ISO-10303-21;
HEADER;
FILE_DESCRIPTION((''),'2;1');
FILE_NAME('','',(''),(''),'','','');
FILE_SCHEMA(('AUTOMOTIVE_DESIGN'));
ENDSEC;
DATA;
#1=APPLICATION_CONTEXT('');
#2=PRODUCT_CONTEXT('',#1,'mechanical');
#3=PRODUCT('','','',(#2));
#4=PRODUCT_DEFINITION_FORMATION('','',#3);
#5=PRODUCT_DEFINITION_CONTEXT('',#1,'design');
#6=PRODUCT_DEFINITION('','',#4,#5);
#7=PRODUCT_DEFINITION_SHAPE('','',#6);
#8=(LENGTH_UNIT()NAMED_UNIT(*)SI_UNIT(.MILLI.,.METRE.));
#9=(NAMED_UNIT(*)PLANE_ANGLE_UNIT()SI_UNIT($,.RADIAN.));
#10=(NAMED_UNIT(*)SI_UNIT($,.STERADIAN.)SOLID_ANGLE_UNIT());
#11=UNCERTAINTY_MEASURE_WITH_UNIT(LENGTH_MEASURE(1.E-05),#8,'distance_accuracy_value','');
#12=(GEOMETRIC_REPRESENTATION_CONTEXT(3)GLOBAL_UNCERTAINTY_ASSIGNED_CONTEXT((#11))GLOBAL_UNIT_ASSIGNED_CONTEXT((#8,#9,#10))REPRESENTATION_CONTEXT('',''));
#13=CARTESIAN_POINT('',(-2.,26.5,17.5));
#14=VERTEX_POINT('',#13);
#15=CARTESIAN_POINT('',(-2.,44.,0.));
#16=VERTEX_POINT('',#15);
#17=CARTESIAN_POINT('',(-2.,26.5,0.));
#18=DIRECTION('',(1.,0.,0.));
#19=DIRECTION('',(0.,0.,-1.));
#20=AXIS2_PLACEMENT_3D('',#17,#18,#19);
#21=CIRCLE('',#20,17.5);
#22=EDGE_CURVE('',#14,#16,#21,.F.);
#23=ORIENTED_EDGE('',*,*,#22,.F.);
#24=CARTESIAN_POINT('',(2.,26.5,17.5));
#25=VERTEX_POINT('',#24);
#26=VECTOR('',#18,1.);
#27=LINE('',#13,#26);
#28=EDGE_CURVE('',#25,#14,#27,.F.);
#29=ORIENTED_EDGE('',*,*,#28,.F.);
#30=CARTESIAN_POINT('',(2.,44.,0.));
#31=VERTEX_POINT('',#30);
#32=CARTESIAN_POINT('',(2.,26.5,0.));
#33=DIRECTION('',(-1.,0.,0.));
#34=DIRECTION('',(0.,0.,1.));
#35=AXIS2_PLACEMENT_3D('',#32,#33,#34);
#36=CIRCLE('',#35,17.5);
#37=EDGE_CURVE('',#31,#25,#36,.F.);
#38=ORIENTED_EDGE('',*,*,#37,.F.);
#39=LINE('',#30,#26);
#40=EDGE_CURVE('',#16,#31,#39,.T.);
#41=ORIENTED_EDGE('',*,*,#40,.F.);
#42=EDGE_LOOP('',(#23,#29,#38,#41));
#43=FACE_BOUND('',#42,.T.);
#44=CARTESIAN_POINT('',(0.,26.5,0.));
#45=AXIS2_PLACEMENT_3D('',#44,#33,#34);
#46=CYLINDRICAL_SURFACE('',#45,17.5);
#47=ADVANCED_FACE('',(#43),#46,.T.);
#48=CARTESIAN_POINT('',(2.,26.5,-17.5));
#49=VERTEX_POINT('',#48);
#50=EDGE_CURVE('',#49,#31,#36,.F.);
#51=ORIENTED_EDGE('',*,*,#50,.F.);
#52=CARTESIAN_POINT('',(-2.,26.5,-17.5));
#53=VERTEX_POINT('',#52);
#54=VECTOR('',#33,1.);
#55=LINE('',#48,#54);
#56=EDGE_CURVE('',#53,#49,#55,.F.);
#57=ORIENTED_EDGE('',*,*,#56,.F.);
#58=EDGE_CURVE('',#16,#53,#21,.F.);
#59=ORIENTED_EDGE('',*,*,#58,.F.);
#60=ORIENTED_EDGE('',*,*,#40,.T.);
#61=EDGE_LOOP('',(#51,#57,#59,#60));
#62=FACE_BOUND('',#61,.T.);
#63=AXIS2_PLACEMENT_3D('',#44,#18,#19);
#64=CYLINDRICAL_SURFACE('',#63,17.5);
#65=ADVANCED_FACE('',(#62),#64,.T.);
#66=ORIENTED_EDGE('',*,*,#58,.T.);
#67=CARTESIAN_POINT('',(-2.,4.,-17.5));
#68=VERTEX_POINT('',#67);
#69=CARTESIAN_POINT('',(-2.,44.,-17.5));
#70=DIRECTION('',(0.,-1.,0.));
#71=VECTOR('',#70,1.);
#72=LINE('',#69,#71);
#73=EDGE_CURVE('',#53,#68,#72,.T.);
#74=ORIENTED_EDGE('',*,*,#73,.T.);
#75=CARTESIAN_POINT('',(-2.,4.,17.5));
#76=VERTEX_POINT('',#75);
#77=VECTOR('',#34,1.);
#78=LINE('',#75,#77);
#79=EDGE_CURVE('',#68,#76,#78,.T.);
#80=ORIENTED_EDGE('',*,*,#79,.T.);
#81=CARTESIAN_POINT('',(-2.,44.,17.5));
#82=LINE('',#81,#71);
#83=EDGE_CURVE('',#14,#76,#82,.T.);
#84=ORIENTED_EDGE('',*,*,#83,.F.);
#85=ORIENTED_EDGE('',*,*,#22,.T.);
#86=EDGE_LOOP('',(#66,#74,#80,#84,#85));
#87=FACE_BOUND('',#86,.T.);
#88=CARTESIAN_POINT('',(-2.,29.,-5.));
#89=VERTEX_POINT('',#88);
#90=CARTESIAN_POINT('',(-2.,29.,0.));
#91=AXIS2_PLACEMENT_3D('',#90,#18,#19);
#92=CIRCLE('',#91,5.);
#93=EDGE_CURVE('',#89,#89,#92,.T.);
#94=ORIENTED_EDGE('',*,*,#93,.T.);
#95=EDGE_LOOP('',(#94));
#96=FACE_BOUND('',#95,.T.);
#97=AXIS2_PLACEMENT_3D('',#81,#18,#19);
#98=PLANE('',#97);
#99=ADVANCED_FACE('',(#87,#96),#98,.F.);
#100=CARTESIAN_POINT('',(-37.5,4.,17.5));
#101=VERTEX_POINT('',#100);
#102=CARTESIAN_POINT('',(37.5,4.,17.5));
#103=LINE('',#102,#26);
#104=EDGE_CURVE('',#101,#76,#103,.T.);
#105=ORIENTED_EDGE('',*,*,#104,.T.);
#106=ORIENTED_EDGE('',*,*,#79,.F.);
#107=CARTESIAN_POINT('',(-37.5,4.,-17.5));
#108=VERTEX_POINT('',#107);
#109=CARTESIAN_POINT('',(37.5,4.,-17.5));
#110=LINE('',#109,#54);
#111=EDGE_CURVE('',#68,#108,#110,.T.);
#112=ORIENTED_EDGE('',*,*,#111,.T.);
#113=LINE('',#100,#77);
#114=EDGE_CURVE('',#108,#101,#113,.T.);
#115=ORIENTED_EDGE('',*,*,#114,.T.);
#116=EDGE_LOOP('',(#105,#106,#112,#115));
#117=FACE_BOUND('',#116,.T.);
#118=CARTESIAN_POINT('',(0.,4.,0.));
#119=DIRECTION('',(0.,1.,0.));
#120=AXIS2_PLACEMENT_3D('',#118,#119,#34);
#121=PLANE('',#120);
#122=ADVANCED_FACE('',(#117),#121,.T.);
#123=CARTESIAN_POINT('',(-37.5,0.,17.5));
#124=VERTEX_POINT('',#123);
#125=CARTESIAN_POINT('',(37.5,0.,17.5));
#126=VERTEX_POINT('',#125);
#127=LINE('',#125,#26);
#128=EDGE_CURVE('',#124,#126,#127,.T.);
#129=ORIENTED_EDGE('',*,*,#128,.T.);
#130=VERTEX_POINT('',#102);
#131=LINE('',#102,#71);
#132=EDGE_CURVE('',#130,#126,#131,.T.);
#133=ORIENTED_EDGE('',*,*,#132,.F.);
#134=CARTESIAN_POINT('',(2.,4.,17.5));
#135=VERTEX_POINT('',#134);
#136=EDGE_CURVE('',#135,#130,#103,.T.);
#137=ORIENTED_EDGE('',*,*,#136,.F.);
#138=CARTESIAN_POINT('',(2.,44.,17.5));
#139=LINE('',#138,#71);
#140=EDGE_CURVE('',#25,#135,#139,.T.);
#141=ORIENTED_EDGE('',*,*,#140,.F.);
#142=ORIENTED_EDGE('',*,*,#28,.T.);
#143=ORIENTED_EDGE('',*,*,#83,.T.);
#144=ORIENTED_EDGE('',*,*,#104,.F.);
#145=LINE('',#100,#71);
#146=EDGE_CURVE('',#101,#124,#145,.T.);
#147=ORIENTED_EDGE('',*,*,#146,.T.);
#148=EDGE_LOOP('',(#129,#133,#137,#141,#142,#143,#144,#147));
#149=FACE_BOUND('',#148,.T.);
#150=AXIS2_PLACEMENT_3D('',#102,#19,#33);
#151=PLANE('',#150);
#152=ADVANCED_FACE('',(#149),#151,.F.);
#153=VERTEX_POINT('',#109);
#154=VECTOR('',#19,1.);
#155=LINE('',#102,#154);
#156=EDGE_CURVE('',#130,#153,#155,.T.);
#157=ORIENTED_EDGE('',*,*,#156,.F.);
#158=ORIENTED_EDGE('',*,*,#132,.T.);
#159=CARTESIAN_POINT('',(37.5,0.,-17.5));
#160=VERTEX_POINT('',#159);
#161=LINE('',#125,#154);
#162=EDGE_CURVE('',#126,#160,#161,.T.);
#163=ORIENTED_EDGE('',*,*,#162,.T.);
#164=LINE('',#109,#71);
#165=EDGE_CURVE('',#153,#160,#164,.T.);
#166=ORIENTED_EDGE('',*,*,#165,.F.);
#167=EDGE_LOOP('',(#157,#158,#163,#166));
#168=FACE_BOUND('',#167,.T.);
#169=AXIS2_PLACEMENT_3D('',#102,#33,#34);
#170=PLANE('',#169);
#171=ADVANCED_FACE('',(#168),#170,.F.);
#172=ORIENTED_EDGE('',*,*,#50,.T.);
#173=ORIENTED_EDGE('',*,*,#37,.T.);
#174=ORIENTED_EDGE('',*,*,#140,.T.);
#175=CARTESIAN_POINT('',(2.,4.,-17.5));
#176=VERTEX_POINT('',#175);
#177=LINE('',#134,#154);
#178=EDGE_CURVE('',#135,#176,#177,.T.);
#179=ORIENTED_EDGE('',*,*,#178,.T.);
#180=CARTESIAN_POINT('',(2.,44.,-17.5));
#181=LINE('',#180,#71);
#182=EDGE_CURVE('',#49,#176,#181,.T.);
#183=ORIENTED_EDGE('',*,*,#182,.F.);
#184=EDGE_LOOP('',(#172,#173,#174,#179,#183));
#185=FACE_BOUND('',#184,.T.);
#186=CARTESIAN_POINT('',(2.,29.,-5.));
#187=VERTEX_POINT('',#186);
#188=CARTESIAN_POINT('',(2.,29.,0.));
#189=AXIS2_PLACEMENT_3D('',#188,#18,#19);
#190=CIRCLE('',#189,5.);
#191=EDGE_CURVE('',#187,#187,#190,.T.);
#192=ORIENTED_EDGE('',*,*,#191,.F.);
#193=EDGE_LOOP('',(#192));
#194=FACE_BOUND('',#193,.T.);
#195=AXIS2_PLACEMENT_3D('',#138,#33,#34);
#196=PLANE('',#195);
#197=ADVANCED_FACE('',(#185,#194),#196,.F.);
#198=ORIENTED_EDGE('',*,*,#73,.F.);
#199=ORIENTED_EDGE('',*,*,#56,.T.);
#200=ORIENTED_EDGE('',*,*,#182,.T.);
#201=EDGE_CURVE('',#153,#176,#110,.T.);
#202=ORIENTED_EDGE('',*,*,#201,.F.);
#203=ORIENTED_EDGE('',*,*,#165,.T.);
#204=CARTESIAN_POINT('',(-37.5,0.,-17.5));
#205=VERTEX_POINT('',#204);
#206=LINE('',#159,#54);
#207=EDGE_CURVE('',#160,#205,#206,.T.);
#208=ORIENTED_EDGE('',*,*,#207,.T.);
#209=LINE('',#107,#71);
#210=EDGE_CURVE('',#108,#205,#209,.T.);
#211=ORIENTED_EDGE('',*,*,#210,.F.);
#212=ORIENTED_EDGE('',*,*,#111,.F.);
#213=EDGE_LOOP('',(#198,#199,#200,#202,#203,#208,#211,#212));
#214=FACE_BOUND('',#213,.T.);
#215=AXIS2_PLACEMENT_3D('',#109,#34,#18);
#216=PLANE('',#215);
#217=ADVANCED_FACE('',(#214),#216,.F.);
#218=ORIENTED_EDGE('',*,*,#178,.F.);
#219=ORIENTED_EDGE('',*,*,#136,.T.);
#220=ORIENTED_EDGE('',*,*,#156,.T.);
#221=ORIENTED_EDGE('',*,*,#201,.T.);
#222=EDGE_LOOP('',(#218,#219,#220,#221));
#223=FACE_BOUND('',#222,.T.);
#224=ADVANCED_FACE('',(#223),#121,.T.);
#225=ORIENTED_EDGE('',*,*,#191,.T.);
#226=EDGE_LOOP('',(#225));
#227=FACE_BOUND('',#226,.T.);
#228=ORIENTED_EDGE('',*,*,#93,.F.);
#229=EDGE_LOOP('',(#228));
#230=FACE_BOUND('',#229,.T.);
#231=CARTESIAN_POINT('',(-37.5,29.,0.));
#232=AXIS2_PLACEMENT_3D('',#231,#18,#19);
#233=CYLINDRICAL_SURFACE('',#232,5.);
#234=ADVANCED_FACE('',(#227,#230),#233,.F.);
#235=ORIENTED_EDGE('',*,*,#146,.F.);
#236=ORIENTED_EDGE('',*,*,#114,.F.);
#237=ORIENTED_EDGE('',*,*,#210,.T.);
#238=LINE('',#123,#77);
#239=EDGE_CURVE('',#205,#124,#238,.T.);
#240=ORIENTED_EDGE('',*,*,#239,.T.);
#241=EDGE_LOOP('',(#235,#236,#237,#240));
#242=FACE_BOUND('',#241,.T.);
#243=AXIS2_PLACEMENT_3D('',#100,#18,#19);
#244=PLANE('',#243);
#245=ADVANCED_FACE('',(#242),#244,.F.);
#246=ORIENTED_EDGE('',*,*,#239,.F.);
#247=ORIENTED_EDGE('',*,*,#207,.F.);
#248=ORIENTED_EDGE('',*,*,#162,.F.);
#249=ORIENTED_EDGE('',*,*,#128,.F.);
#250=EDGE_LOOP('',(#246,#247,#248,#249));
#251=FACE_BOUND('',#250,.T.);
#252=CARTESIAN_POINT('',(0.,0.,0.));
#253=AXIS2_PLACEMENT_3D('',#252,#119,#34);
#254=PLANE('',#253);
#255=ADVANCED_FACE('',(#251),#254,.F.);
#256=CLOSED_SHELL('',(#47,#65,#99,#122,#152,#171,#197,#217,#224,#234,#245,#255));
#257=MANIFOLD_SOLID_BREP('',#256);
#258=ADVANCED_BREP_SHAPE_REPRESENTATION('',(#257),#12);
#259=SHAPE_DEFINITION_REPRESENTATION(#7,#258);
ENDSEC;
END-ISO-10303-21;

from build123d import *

# Parameters (mm, degrees)
SKETCH1_W           = 75
SKETCH1_H           = 35
BOSS_EXTRUDE1_DEPTH = 4
SKETCH2_W           = 4
SKETCH2_H           = 35
BOSS_EXTRUDE2_DEPTH = 40
SKETCH3_R           = 5
CUT_EXTRUDE1_DEPTH  = 62.664414373
FILLET1_R           = 17.5


with BuildPart() as part:
    # Sketch1 → Boss-Extrude1 (new body)
    with BuildSketch(Plane(origin=(0, 0, 0), x_dir=(1, 0, 0), z_dir=(0, 1, 0))):
        Rectangle(SKETCH1_W, SKETCH1_H)
    extrude(amount=BOSS_EXTRUDE1_DEPTH)

    # Sketch2 → Boss-Extrude2 (add)
    with BuildSketch(Plane(origin=(0, 4, 0), x_dir=(1, 0, 0), z_dir=(0, 1, 0))):
        Rectangle(SKETCH2_W, SKETCH2_H)
    extrude(amount=BOSS_EXTRUDE2_DEPTH)

    # Sketch3 → Cut-Extrude1 (cut, through all)
    with BuildSketch(Plane(origin=(2, 0, 0), x_dir=(0, 0, -1), z_dir=(1, 0, 0))):
        with Locations((0, 29)):
            Circle(SKETCH3_R)
    extrude(amount=-CUT_EXTRUDE1_DEPTH, mode=Mode.SUBTRACT)

    # Fillet1
    fillet1_edges = [part.edges().sort_by_distance(p)[0] for p in [
        (0, 44, -17.5),
        (0, 44, 17.5),
    ]]
    fillet(fillet1_edges, radius=FILLET1_R - 0.0001)  # a hair under: the kernel refuses the full size


solid = part.part
